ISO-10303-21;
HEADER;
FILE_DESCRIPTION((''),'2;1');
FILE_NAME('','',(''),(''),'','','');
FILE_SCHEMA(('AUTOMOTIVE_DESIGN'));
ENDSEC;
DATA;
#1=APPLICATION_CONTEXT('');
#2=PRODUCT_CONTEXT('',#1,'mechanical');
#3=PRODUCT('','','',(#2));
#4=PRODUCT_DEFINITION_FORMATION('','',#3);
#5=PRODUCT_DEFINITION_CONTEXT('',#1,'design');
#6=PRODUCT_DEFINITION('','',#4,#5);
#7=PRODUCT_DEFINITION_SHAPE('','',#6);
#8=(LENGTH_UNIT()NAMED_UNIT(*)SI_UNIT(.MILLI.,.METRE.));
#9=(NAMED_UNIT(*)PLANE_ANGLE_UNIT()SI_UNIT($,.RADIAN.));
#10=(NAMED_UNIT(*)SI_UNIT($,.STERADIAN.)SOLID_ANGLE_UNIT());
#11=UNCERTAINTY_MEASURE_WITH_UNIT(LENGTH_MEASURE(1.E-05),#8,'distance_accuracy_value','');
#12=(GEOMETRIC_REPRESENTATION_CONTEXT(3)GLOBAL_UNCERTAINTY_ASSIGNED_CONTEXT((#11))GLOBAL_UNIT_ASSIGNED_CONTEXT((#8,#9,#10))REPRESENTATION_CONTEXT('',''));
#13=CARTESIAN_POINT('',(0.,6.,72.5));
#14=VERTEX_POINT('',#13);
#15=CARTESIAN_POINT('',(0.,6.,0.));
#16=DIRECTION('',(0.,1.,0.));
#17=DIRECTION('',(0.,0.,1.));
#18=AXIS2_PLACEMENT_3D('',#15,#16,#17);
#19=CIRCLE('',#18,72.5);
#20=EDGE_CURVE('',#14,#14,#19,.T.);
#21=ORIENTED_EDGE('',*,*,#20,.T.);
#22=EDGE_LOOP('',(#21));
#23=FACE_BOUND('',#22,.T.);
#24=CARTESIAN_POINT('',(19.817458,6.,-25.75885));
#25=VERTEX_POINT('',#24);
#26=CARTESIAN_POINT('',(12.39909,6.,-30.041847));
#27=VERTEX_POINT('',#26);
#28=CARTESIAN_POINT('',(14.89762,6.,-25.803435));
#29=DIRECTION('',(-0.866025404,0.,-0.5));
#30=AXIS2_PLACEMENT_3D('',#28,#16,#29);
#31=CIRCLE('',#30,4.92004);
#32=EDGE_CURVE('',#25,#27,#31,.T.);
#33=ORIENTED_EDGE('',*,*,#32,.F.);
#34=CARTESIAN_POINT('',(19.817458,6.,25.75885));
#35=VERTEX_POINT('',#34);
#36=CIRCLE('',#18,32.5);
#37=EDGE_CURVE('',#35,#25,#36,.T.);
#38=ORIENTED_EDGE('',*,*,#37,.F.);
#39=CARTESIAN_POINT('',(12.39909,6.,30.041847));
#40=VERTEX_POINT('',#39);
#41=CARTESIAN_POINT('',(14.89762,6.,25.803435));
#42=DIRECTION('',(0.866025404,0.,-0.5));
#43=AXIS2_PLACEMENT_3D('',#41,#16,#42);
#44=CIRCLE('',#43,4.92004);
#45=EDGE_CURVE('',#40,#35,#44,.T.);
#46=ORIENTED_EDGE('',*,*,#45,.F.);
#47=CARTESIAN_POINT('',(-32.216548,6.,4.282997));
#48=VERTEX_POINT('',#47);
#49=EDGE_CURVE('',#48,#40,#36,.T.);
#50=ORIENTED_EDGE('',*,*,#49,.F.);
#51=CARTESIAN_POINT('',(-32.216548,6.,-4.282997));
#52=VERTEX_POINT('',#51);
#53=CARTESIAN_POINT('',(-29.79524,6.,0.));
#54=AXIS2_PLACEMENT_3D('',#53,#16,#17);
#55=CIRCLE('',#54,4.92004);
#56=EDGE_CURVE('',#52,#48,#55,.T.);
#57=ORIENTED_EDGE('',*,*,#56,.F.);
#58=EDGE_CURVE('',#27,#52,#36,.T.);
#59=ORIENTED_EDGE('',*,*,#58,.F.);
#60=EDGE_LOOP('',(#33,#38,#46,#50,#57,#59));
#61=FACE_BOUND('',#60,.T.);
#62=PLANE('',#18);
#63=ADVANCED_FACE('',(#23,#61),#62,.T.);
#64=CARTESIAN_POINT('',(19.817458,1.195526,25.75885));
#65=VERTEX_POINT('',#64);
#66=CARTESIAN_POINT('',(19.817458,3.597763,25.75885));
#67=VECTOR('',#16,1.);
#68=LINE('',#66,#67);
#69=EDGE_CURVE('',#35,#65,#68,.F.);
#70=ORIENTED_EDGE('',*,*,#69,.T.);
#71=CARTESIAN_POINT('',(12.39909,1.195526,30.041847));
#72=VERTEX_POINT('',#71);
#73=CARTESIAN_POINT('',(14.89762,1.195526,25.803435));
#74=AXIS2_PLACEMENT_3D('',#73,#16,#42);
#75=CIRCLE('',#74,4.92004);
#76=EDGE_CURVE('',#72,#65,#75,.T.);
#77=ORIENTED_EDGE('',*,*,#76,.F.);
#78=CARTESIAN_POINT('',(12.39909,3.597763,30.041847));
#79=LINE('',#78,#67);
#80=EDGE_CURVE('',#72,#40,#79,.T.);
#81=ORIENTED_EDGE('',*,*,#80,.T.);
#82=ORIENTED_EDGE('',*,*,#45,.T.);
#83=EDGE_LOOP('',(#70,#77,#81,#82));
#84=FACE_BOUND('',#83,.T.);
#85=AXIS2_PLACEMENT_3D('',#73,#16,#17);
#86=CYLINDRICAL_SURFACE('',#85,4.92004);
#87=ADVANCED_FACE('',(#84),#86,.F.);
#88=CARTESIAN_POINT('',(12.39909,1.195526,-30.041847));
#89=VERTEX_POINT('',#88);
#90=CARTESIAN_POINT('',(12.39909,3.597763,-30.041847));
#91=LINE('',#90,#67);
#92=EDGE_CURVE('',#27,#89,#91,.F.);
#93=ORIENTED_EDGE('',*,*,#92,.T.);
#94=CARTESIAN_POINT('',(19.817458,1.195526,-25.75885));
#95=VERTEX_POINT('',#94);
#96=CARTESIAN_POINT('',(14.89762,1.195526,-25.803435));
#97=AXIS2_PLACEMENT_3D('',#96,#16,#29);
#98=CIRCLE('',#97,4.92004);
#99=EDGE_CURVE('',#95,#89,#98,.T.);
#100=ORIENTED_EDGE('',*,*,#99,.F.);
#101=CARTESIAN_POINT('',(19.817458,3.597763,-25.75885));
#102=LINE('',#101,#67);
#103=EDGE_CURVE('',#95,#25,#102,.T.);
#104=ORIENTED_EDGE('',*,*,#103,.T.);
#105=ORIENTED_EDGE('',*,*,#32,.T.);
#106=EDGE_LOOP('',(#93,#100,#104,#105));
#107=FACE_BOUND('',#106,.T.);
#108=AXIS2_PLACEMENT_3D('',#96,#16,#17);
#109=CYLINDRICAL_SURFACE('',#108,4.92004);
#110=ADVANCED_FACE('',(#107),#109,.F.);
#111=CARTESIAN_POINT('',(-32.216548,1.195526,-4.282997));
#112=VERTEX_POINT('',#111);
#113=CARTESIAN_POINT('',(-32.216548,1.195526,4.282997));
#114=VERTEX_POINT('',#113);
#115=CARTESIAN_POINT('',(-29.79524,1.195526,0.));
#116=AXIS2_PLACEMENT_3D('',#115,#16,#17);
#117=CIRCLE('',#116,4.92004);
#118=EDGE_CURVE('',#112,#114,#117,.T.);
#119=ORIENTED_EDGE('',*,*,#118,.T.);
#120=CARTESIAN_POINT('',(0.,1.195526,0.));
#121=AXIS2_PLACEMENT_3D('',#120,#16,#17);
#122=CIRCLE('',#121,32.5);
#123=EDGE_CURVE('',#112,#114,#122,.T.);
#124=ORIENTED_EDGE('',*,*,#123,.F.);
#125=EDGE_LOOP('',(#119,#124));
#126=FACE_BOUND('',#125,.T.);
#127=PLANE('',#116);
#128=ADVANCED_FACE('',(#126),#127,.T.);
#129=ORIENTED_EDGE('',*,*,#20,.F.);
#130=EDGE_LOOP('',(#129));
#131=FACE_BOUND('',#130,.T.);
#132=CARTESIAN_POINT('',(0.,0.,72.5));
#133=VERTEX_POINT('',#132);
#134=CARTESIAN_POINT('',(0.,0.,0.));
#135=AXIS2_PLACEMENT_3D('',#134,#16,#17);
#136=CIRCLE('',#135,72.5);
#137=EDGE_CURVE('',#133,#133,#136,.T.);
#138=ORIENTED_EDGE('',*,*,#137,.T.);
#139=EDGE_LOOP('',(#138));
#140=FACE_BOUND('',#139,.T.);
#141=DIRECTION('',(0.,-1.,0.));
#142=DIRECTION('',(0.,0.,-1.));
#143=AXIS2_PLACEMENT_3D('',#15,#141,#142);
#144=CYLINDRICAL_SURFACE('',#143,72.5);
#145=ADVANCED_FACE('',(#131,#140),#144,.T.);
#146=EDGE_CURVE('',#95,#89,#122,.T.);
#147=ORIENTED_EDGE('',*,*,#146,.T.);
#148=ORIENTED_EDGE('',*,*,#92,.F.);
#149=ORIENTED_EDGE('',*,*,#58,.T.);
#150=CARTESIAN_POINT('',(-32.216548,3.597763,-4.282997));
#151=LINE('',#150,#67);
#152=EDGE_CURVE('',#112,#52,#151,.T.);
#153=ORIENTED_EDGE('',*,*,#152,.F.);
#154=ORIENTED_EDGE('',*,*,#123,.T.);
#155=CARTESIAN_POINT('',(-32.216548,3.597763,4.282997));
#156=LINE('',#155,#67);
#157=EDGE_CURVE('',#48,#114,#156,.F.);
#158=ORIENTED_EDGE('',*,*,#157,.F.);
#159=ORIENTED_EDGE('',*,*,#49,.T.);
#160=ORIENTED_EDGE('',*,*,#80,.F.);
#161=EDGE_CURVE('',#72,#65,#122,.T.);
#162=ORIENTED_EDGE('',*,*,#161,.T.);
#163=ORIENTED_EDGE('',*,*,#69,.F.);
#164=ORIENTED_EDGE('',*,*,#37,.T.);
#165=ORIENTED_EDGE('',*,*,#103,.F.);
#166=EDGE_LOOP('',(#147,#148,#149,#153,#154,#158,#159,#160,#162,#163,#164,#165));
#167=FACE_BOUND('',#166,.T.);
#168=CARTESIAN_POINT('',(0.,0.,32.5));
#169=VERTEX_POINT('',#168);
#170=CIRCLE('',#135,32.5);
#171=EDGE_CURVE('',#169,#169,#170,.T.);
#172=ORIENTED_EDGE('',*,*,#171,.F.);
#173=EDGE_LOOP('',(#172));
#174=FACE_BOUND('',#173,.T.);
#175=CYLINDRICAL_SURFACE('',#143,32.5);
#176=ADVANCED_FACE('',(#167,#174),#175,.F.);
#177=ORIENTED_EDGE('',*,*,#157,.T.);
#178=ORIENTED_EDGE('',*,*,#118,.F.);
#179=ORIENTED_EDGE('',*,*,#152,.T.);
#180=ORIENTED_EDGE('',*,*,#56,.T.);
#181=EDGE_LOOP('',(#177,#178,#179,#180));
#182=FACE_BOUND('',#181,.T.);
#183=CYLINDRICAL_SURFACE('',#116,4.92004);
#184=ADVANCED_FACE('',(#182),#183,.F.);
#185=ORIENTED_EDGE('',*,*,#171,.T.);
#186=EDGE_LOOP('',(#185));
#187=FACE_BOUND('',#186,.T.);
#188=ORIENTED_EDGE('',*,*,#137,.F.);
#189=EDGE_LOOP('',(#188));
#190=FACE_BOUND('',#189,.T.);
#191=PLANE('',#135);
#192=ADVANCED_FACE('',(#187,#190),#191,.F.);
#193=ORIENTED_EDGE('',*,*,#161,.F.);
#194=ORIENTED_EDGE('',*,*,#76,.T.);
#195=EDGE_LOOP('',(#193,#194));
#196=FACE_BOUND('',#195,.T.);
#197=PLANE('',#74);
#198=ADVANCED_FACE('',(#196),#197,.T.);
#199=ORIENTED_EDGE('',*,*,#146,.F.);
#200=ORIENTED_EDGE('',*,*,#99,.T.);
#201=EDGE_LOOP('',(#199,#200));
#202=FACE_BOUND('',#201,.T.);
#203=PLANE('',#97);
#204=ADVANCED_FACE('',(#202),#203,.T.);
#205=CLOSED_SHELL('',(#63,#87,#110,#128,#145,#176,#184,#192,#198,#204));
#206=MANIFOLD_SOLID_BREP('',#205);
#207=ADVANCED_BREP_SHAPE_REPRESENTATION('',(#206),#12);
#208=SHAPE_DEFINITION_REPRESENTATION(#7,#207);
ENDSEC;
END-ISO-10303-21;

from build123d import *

# Parameters (mm, degrees)
SKETCH1_R           = 72.5
BOSS_EXTRUDE1_DEPTH = 6
SKETCH2_R           = 32.5
CUT_EXTRUDE1_DEPTH  = 103.705890776
SKETCH3_R           = 4.920040128
CUT_EXTRUDE2_DEPTH  = 4.804474114
CIRPATTERN1_COUNT   = 3


with BuildPart() as part:
    # Sketch1 → Boss-Extrude1 (new body)
    with BuildSketch(Plane(origin=(0, 0, 0), x_dir=(1, 0, 0), z_dir=(0, 1, 0))):
        Circle(SKETCH1_R)
    extrude(amount=BOSS_EXTRUDE1_DEPTH)

    # Sketch2 → Cut-Extrude1 (cut, through all)
    with BuildSketch(Plane(origin=(0, 0, 0), x_dir=(1, 0, 0), z_dir=(0, 1, 0))):
        Circle(SKETCH2_R)
    extrude(amount=CUT_EXTRUDE1_DEPTH, mode=Mode.SUBTRACT)

    # Sketch3 → Cut-Extrude2 (cut)
    with BuildSketch(Plane(origin=(0, 6, 0), x_dir=(1, 0, 0), z_dir=(0, 1, 0))):
        with Locations((-29.795239774, 0)):
            Circle(SKETCH3_R)
    cut_extrude2 = extrude(amount=-CUT_EXTRUDE2_DEPTH, mode=Mode.SUBTRACT)

    # CirPattern1: Cut-Extrude2 ×3 about axis
    cirpattern1_axis = Axis((0, 0, 0), (0, 1, 0))
    for i in range(1, CIRPATTERN1_COUNT):
        add(cut_extrude2.rotate(cirpattern1_axis, i * 360 / CIRPATTERN1_COUNT), mode=Mode.SUBTRACT)


solid = part.part
